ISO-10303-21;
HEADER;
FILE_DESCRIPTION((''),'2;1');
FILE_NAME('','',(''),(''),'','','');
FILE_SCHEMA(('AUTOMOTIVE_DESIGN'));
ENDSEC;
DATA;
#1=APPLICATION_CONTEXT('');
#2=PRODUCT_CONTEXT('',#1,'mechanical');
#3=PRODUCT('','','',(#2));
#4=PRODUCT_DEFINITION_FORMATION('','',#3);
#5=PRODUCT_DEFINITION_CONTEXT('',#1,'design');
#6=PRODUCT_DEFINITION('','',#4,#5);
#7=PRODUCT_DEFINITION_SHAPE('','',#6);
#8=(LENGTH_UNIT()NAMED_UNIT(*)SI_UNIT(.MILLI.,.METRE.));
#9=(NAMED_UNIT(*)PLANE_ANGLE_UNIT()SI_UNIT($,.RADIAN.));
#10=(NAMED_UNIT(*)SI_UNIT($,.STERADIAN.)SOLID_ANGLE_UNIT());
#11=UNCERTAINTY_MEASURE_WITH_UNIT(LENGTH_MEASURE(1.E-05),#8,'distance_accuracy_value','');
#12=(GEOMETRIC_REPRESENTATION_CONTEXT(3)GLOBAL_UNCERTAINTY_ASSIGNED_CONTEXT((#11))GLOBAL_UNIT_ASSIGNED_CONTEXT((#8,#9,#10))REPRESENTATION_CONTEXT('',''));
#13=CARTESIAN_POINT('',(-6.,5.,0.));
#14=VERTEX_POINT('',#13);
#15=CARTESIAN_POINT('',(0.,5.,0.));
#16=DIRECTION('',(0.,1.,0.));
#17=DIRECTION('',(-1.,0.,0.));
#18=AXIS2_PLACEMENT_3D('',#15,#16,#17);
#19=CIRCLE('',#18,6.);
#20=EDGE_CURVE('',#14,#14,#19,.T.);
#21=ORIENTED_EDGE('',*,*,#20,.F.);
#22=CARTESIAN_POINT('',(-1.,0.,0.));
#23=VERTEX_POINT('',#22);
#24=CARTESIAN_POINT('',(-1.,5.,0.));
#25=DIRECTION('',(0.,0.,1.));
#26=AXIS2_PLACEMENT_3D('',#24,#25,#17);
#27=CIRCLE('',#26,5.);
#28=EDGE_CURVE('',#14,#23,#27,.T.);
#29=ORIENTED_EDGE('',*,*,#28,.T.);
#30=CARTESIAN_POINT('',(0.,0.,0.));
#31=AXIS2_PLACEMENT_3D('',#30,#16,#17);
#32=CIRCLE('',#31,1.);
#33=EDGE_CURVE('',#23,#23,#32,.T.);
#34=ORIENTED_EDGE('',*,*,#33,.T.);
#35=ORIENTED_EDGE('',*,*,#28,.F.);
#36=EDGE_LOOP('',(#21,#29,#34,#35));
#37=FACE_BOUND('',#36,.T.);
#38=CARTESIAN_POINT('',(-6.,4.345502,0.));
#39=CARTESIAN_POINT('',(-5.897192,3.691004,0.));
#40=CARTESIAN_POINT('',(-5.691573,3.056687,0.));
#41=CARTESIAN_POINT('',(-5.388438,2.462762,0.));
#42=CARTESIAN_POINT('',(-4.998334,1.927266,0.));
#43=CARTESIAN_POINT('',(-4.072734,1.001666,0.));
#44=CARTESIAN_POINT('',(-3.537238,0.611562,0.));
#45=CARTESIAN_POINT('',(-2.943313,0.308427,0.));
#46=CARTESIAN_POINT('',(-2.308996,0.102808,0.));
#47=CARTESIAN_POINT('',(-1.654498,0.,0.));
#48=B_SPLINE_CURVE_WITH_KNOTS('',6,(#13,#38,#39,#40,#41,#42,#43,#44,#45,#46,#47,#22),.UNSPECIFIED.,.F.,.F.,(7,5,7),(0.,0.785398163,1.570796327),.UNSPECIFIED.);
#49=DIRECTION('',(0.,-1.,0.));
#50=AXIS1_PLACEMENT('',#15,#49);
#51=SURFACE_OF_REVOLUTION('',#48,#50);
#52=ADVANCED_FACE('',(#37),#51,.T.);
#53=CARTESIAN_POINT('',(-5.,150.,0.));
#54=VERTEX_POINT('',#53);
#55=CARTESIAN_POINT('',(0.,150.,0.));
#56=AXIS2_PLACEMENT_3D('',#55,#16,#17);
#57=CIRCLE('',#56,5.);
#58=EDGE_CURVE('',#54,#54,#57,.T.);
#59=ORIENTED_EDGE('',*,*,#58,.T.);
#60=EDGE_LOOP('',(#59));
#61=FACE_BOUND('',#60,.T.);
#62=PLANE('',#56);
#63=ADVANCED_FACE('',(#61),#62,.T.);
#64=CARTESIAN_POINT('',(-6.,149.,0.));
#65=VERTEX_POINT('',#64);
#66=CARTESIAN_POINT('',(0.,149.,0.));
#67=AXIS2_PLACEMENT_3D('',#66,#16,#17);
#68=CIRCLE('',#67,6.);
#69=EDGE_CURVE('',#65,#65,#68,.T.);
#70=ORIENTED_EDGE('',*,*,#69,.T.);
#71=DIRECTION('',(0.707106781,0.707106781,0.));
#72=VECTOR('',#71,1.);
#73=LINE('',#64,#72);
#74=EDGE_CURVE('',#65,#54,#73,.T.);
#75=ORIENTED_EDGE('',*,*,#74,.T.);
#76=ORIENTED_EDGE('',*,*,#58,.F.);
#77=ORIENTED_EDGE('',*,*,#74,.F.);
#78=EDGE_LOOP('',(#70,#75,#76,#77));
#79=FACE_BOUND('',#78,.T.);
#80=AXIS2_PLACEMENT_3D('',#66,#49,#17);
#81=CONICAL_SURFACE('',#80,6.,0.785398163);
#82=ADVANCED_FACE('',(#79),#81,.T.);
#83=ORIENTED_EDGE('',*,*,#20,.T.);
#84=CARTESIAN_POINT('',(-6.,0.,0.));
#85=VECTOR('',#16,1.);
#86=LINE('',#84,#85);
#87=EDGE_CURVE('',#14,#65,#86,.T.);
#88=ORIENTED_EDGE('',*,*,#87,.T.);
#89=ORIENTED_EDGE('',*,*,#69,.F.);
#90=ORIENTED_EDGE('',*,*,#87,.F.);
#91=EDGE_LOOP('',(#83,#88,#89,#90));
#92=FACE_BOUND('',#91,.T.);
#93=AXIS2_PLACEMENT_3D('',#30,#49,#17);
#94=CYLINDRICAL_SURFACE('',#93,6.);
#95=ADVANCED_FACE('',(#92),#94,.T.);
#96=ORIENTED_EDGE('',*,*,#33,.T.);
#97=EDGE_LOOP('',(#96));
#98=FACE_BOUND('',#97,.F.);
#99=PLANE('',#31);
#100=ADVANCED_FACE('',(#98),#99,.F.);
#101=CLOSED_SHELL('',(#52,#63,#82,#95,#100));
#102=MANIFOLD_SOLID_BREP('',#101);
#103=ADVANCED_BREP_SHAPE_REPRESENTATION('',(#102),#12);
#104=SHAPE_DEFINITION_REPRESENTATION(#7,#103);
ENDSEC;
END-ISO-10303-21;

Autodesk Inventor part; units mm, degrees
ref_plane "YZ Plane" through (0, 0, 0) normal (1, 0, 0) x (0, 1, 0)
ref_plane "XZ Plane" through (0, 0, 0) normal (0, 1, 0) x (-1, 0, 0)
ref_plane "XY Plane" through (0, 0, 0) normal (0, 0, 1) x (1, 0, 0)
sketch "Sketch1" plane through (0, 0, 0) normal (0, 1, 0) x (-1, 0, 0)
  circle A0 centre (0, 0) radius 6
  dimension "d0" = 12
extrude "Extrusion1" add sketch "Sketch1" along normal blind 150
thread "Thread1" size "M12x1" class "6g" standard "ISO Metric profile" length 11
chamfer "Chamfer1" distance 1 angle 45 1 edges at (6, 150, 0)
fillet "Fillet1" radius 5 1 edges at (6, 0, 0)
properties part number "Griff"
